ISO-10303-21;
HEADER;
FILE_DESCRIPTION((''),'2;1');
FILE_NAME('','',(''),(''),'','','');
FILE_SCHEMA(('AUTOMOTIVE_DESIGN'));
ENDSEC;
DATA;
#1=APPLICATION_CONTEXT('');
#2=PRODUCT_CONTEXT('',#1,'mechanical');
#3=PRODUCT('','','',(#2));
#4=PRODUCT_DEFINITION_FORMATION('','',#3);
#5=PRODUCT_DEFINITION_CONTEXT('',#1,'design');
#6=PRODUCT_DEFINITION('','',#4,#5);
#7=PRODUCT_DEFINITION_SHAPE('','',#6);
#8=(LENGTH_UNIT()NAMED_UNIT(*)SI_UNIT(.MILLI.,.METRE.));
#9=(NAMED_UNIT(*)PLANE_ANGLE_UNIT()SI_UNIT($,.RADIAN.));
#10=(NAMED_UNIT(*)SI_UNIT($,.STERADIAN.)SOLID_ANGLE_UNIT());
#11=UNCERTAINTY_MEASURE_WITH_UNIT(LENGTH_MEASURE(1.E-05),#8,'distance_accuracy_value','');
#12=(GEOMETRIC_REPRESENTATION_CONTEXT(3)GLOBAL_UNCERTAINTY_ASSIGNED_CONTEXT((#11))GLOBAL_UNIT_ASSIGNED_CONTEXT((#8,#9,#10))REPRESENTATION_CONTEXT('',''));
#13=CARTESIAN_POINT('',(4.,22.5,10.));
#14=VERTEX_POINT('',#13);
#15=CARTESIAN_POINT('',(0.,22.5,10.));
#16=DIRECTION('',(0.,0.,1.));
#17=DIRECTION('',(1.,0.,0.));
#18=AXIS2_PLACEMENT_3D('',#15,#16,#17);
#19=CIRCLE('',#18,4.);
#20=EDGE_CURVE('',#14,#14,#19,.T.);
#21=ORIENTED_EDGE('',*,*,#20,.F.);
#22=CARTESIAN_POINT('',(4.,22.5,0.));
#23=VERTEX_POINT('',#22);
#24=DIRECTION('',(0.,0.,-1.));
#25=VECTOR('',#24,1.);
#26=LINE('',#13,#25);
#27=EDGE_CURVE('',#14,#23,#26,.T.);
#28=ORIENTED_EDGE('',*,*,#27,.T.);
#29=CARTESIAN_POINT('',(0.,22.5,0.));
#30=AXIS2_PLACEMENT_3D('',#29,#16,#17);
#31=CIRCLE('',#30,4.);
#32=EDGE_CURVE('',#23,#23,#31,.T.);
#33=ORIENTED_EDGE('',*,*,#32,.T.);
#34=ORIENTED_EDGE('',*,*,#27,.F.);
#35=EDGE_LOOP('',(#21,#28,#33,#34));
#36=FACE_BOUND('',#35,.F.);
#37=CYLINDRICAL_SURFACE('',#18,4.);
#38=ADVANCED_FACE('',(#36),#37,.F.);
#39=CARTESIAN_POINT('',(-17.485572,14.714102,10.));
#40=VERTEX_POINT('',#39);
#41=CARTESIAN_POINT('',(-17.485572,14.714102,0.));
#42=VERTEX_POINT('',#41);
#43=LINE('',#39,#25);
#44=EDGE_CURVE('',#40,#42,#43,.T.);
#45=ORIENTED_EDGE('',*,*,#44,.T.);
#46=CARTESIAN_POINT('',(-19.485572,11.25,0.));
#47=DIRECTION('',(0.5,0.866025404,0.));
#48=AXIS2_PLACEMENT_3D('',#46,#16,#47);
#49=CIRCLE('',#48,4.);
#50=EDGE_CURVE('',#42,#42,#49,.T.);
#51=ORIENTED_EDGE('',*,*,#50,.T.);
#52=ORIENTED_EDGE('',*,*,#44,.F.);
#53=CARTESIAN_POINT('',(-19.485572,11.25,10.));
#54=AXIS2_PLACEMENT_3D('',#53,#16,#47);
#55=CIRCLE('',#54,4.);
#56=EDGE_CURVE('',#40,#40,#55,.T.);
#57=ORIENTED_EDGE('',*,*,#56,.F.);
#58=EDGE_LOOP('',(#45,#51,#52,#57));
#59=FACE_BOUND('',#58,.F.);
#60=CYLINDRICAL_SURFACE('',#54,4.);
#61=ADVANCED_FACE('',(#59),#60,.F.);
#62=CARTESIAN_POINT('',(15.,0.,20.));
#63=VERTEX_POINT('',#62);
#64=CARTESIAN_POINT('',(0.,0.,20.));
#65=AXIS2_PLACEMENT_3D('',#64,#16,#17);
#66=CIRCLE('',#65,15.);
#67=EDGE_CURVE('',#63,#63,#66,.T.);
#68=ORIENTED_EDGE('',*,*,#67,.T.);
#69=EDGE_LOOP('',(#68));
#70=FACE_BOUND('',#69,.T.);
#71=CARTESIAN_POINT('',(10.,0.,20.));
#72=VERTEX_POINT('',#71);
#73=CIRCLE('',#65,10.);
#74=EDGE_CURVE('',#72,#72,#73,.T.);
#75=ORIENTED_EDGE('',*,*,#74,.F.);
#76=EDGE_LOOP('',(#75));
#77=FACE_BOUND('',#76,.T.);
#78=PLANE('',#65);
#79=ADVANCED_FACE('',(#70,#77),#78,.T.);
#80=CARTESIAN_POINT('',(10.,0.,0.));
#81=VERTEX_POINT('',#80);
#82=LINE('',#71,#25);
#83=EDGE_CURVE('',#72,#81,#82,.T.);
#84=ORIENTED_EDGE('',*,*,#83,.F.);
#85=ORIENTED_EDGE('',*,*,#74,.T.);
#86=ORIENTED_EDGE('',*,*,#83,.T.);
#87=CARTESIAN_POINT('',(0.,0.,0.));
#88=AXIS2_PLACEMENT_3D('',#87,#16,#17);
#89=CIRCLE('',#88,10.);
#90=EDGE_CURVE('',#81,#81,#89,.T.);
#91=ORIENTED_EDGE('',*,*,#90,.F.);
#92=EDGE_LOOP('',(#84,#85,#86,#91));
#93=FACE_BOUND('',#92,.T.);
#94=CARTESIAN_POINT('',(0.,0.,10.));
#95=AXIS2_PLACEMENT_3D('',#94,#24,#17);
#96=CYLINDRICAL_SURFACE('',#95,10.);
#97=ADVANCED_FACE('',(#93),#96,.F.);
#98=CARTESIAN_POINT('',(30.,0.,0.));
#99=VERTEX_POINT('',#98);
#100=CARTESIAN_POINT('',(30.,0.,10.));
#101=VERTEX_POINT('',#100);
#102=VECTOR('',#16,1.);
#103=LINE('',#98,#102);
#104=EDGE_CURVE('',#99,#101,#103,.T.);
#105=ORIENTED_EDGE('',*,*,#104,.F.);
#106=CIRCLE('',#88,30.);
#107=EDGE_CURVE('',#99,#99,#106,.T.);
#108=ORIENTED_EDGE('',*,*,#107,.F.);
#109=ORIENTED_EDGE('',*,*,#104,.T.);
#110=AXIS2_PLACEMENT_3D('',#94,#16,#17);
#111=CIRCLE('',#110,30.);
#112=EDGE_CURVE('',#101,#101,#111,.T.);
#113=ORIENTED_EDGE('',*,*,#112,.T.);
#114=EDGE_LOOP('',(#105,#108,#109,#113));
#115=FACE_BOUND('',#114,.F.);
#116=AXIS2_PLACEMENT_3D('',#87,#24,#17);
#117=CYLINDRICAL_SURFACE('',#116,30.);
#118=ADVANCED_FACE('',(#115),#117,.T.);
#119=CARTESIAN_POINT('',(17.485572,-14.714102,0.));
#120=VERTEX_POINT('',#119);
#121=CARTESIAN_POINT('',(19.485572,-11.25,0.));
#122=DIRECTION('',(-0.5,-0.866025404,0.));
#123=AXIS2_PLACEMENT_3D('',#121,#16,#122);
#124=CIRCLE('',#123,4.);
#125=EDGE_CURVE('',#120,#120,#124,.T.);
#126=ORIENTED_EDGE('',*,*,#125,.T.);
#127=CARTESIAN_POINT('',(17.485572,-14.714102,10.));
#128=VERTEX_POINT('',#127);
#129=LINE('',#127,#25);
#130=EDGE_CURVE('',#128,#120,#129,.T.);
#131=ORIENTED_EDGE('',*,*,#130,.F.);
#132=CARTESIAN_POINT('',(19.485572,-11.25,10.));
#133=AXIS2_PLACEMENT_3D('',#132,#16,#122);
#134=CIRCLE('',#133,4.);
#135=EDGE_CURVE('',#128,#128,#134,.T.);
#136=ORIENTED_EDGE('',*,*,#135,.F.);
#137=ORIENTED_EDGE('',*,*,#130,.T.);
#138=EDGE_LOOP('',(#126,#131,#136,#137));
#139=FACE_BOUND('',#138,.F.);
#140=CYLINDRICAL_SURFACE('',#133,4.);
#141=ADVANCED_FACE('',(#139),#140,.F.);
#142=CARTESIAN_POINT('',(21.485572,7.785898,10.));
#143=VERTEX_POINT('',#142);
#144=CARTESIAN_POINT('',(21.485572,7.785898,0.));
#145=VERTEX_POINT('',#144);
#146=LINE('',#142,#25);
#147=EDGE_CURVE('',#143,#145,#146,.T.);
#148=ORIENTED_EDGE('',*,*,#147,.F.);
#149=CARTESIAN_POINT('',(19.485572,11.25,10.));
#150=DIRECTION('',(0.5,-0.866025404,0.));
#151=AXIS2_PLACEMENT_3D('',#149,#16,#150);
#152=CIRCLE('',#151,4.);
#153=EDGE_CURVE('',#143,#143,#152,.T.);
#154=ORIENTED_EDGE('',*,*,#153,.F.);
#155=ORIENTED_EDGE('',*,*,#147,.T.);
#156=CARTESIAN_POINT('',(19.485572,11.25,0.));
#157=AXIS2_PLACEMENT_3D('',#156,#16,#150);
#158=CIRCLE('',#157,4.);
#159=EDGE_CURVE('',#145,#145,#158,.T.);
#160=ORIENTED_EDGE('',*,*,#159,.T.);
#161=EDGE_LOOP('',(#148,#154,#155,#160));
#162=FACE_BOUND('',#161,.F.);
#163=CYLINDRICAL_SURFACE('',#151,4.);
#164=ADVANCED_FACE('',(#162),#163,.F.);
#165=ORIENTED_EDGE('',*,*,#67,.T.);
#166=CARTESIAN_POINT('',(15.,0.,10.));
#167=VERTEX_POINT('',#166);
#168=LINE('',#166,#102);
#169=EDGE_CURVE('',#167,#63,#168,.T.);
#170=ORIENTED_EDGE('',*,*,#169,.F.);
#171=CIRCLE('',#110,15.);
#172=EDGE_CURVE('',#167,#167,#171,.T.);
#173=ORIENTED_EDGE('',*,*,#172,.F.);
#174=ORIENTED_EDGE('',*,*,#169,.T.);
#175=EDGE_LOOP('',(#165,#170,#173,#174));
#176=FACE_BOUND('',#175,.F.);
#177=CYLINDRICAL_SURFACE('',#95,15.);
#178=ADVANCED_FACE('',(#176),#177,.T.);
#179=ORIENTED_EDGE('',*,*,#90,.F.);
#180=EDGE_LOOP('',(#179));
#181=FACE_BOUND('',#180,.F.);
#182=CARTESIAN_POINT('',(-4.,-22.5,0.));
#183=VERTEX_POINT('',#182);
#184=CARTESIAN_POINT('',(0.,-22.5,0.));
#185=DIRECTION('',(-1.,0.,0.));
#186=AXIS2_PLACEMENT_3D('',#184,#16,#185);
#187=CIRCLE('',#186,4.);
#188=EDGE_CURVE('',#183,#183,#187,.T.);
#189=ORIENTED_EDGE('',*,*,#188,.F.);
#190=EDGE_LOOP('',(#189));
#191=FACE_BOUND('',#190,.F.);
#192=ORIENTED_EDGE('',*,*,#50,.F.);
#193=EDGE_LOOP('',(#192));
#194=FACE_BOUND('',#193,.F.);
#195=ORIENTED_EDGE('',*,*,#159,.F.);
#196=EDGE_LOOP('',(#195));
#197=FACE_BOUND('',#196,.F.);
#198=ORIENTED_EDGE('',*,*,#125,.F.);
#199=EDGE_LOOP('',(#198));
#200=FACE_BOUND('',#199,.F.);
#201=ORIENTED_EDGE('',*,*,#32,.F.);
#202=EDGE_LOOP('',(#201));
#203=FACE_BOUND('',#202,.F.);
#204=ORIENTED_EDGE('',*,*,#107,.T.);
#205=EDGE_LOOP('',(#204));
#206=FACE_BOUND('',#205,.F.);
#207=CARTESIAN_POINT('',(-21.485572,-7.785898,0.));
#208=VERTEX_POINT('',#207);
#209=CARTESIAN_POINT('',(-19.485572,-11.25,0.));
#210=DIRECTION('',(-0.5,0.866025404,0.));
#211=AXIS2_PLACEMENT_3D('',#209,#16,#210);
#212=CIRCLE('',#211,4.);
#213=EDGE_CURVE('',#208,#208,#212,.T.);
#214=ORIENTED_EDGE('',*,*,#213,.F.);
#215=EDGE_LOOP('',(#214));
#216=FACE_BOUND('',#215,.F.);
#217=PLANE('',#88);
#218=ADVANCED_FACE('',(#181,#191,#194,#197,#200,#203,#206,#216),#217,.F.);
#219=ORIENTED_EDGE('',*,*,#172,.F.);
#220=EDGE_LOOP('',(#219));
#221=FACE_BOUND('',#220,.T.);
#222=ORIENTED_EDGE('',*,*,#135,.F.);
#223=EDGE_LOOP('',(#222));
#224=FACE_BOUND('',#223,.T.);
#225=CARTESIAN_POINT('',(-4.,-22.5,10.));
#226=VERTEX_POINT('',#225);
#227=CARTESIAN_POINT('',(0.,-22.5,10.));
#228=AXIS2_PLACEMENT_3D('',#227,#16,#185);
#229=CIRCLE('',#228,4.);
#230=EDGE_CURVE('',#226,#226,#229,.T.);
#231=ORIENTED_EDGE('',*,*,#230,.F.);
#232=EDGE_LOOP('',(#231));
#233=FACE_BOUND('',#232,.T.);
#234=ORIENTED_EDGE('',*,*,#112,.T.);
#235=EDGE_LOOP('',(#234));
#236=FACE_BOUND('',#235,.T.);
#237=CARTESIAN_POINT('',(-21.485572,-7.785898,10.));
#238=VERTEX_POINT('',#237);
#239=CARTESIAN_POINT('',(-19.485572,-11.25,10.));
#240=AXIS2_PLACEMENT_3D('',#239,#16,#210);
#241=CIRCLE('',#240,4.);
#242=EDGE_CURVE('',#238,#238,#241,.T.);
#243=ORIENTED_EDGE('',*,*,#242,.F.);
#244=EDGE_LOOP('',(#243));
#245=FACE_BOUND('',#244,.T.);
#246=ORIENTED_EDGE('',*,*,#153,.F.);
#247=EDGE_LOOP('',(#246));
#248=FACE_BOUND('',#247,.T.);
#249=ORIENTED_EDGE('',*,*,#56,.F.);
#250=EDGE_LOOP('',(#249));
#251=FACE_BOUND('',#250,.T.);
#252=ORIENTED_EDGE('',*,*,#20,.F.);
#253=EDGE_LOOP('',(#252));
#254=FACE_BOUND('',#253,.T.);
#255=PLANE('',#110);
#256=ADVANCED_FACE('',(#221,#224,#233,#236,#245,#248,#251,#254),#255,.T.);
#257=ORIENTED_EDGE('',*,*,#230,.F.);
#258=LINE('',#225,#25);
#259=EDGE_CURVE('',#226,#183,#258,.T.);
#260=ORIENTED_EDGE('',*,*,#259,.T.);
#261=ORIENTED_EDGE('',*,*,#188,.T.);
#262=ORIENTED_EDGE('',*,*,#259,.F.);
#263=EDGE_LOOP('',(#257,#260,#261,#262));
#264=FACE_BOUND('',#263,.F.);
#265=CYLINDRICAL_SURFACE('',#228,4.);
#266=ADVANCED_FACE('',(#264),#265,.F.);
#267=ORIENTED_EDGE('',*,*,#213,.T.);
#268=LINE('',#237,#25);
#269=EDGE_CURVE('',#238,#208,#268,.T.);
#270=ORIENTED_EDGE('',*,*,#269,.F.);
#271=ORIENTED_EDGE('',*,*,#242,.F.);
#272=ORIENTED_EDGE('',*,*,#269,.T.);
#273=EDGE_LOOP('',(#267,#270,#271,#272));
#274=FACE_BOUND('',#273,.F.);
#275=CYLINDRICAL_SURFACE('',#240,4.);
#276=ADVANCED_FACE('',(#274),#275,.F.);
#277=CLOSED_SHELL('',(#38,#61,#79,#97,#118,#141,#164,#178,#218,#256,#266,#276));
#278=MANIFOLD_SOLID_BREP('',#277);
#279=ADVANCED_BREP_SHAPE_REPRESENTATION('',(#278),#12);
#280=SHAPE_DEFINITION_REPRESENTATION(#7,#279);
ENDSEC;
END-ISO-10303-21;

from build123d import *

# Parameters (mm, degrees)
F0_R            = 30
F0_R_2          = 10
F1_DEPTH        = 10
F2_R            = 15
F2_R_2          = 10
F3_DEPTH        = 10
F4_R            = 4
F5_DEPTH        = 10.001
F5_COPIES_COUNT = 6


# Not quite as in the source:
# - a pattern or mirror of a feature is missing from the dataset's text; its kind, count and spacing are read off the source's solid


with BuildPart() as f1:
    # F0 (on Top) → F1 (new body)
    with BuildSketch(Plane.XY):
        Circle(F0_R)
        Circle(F0_R_2, mode=Mode.SUBTRACT)
    extrude(amount=F1_DEPTH)

    # F2 (on face) → F3 (join)
    with BuildSketch(Plane.XY.offset(10)):
        Circle(F2_R)
        Circle(F2_R_2, mode=Mode.SUBTRACT)
    extrude(amount=F3_DEPTH)

    # F4 (on face) → F5 (cut, through all)
    with BuildSketch(Plane.XY.offset(10)):
        with Locations((0, 22.5)):
            Circle(F4_R)
    f5 = extrude(amount=-F5_DEPTH, mode=Mode.SUBTRACT)

    # F5_copies: F5 ×6 about axis
    f5_copies_axis = Axis((0, 0, 0), (0, 0, 1))
    for i in range(1, F5_COPIES_COUNT):
        add(f5.rotate(f5_copies_axis, i * 360 / F5_COPIES_COUNT), mode=Mode.SUBTRACT)


solid = f1.part
